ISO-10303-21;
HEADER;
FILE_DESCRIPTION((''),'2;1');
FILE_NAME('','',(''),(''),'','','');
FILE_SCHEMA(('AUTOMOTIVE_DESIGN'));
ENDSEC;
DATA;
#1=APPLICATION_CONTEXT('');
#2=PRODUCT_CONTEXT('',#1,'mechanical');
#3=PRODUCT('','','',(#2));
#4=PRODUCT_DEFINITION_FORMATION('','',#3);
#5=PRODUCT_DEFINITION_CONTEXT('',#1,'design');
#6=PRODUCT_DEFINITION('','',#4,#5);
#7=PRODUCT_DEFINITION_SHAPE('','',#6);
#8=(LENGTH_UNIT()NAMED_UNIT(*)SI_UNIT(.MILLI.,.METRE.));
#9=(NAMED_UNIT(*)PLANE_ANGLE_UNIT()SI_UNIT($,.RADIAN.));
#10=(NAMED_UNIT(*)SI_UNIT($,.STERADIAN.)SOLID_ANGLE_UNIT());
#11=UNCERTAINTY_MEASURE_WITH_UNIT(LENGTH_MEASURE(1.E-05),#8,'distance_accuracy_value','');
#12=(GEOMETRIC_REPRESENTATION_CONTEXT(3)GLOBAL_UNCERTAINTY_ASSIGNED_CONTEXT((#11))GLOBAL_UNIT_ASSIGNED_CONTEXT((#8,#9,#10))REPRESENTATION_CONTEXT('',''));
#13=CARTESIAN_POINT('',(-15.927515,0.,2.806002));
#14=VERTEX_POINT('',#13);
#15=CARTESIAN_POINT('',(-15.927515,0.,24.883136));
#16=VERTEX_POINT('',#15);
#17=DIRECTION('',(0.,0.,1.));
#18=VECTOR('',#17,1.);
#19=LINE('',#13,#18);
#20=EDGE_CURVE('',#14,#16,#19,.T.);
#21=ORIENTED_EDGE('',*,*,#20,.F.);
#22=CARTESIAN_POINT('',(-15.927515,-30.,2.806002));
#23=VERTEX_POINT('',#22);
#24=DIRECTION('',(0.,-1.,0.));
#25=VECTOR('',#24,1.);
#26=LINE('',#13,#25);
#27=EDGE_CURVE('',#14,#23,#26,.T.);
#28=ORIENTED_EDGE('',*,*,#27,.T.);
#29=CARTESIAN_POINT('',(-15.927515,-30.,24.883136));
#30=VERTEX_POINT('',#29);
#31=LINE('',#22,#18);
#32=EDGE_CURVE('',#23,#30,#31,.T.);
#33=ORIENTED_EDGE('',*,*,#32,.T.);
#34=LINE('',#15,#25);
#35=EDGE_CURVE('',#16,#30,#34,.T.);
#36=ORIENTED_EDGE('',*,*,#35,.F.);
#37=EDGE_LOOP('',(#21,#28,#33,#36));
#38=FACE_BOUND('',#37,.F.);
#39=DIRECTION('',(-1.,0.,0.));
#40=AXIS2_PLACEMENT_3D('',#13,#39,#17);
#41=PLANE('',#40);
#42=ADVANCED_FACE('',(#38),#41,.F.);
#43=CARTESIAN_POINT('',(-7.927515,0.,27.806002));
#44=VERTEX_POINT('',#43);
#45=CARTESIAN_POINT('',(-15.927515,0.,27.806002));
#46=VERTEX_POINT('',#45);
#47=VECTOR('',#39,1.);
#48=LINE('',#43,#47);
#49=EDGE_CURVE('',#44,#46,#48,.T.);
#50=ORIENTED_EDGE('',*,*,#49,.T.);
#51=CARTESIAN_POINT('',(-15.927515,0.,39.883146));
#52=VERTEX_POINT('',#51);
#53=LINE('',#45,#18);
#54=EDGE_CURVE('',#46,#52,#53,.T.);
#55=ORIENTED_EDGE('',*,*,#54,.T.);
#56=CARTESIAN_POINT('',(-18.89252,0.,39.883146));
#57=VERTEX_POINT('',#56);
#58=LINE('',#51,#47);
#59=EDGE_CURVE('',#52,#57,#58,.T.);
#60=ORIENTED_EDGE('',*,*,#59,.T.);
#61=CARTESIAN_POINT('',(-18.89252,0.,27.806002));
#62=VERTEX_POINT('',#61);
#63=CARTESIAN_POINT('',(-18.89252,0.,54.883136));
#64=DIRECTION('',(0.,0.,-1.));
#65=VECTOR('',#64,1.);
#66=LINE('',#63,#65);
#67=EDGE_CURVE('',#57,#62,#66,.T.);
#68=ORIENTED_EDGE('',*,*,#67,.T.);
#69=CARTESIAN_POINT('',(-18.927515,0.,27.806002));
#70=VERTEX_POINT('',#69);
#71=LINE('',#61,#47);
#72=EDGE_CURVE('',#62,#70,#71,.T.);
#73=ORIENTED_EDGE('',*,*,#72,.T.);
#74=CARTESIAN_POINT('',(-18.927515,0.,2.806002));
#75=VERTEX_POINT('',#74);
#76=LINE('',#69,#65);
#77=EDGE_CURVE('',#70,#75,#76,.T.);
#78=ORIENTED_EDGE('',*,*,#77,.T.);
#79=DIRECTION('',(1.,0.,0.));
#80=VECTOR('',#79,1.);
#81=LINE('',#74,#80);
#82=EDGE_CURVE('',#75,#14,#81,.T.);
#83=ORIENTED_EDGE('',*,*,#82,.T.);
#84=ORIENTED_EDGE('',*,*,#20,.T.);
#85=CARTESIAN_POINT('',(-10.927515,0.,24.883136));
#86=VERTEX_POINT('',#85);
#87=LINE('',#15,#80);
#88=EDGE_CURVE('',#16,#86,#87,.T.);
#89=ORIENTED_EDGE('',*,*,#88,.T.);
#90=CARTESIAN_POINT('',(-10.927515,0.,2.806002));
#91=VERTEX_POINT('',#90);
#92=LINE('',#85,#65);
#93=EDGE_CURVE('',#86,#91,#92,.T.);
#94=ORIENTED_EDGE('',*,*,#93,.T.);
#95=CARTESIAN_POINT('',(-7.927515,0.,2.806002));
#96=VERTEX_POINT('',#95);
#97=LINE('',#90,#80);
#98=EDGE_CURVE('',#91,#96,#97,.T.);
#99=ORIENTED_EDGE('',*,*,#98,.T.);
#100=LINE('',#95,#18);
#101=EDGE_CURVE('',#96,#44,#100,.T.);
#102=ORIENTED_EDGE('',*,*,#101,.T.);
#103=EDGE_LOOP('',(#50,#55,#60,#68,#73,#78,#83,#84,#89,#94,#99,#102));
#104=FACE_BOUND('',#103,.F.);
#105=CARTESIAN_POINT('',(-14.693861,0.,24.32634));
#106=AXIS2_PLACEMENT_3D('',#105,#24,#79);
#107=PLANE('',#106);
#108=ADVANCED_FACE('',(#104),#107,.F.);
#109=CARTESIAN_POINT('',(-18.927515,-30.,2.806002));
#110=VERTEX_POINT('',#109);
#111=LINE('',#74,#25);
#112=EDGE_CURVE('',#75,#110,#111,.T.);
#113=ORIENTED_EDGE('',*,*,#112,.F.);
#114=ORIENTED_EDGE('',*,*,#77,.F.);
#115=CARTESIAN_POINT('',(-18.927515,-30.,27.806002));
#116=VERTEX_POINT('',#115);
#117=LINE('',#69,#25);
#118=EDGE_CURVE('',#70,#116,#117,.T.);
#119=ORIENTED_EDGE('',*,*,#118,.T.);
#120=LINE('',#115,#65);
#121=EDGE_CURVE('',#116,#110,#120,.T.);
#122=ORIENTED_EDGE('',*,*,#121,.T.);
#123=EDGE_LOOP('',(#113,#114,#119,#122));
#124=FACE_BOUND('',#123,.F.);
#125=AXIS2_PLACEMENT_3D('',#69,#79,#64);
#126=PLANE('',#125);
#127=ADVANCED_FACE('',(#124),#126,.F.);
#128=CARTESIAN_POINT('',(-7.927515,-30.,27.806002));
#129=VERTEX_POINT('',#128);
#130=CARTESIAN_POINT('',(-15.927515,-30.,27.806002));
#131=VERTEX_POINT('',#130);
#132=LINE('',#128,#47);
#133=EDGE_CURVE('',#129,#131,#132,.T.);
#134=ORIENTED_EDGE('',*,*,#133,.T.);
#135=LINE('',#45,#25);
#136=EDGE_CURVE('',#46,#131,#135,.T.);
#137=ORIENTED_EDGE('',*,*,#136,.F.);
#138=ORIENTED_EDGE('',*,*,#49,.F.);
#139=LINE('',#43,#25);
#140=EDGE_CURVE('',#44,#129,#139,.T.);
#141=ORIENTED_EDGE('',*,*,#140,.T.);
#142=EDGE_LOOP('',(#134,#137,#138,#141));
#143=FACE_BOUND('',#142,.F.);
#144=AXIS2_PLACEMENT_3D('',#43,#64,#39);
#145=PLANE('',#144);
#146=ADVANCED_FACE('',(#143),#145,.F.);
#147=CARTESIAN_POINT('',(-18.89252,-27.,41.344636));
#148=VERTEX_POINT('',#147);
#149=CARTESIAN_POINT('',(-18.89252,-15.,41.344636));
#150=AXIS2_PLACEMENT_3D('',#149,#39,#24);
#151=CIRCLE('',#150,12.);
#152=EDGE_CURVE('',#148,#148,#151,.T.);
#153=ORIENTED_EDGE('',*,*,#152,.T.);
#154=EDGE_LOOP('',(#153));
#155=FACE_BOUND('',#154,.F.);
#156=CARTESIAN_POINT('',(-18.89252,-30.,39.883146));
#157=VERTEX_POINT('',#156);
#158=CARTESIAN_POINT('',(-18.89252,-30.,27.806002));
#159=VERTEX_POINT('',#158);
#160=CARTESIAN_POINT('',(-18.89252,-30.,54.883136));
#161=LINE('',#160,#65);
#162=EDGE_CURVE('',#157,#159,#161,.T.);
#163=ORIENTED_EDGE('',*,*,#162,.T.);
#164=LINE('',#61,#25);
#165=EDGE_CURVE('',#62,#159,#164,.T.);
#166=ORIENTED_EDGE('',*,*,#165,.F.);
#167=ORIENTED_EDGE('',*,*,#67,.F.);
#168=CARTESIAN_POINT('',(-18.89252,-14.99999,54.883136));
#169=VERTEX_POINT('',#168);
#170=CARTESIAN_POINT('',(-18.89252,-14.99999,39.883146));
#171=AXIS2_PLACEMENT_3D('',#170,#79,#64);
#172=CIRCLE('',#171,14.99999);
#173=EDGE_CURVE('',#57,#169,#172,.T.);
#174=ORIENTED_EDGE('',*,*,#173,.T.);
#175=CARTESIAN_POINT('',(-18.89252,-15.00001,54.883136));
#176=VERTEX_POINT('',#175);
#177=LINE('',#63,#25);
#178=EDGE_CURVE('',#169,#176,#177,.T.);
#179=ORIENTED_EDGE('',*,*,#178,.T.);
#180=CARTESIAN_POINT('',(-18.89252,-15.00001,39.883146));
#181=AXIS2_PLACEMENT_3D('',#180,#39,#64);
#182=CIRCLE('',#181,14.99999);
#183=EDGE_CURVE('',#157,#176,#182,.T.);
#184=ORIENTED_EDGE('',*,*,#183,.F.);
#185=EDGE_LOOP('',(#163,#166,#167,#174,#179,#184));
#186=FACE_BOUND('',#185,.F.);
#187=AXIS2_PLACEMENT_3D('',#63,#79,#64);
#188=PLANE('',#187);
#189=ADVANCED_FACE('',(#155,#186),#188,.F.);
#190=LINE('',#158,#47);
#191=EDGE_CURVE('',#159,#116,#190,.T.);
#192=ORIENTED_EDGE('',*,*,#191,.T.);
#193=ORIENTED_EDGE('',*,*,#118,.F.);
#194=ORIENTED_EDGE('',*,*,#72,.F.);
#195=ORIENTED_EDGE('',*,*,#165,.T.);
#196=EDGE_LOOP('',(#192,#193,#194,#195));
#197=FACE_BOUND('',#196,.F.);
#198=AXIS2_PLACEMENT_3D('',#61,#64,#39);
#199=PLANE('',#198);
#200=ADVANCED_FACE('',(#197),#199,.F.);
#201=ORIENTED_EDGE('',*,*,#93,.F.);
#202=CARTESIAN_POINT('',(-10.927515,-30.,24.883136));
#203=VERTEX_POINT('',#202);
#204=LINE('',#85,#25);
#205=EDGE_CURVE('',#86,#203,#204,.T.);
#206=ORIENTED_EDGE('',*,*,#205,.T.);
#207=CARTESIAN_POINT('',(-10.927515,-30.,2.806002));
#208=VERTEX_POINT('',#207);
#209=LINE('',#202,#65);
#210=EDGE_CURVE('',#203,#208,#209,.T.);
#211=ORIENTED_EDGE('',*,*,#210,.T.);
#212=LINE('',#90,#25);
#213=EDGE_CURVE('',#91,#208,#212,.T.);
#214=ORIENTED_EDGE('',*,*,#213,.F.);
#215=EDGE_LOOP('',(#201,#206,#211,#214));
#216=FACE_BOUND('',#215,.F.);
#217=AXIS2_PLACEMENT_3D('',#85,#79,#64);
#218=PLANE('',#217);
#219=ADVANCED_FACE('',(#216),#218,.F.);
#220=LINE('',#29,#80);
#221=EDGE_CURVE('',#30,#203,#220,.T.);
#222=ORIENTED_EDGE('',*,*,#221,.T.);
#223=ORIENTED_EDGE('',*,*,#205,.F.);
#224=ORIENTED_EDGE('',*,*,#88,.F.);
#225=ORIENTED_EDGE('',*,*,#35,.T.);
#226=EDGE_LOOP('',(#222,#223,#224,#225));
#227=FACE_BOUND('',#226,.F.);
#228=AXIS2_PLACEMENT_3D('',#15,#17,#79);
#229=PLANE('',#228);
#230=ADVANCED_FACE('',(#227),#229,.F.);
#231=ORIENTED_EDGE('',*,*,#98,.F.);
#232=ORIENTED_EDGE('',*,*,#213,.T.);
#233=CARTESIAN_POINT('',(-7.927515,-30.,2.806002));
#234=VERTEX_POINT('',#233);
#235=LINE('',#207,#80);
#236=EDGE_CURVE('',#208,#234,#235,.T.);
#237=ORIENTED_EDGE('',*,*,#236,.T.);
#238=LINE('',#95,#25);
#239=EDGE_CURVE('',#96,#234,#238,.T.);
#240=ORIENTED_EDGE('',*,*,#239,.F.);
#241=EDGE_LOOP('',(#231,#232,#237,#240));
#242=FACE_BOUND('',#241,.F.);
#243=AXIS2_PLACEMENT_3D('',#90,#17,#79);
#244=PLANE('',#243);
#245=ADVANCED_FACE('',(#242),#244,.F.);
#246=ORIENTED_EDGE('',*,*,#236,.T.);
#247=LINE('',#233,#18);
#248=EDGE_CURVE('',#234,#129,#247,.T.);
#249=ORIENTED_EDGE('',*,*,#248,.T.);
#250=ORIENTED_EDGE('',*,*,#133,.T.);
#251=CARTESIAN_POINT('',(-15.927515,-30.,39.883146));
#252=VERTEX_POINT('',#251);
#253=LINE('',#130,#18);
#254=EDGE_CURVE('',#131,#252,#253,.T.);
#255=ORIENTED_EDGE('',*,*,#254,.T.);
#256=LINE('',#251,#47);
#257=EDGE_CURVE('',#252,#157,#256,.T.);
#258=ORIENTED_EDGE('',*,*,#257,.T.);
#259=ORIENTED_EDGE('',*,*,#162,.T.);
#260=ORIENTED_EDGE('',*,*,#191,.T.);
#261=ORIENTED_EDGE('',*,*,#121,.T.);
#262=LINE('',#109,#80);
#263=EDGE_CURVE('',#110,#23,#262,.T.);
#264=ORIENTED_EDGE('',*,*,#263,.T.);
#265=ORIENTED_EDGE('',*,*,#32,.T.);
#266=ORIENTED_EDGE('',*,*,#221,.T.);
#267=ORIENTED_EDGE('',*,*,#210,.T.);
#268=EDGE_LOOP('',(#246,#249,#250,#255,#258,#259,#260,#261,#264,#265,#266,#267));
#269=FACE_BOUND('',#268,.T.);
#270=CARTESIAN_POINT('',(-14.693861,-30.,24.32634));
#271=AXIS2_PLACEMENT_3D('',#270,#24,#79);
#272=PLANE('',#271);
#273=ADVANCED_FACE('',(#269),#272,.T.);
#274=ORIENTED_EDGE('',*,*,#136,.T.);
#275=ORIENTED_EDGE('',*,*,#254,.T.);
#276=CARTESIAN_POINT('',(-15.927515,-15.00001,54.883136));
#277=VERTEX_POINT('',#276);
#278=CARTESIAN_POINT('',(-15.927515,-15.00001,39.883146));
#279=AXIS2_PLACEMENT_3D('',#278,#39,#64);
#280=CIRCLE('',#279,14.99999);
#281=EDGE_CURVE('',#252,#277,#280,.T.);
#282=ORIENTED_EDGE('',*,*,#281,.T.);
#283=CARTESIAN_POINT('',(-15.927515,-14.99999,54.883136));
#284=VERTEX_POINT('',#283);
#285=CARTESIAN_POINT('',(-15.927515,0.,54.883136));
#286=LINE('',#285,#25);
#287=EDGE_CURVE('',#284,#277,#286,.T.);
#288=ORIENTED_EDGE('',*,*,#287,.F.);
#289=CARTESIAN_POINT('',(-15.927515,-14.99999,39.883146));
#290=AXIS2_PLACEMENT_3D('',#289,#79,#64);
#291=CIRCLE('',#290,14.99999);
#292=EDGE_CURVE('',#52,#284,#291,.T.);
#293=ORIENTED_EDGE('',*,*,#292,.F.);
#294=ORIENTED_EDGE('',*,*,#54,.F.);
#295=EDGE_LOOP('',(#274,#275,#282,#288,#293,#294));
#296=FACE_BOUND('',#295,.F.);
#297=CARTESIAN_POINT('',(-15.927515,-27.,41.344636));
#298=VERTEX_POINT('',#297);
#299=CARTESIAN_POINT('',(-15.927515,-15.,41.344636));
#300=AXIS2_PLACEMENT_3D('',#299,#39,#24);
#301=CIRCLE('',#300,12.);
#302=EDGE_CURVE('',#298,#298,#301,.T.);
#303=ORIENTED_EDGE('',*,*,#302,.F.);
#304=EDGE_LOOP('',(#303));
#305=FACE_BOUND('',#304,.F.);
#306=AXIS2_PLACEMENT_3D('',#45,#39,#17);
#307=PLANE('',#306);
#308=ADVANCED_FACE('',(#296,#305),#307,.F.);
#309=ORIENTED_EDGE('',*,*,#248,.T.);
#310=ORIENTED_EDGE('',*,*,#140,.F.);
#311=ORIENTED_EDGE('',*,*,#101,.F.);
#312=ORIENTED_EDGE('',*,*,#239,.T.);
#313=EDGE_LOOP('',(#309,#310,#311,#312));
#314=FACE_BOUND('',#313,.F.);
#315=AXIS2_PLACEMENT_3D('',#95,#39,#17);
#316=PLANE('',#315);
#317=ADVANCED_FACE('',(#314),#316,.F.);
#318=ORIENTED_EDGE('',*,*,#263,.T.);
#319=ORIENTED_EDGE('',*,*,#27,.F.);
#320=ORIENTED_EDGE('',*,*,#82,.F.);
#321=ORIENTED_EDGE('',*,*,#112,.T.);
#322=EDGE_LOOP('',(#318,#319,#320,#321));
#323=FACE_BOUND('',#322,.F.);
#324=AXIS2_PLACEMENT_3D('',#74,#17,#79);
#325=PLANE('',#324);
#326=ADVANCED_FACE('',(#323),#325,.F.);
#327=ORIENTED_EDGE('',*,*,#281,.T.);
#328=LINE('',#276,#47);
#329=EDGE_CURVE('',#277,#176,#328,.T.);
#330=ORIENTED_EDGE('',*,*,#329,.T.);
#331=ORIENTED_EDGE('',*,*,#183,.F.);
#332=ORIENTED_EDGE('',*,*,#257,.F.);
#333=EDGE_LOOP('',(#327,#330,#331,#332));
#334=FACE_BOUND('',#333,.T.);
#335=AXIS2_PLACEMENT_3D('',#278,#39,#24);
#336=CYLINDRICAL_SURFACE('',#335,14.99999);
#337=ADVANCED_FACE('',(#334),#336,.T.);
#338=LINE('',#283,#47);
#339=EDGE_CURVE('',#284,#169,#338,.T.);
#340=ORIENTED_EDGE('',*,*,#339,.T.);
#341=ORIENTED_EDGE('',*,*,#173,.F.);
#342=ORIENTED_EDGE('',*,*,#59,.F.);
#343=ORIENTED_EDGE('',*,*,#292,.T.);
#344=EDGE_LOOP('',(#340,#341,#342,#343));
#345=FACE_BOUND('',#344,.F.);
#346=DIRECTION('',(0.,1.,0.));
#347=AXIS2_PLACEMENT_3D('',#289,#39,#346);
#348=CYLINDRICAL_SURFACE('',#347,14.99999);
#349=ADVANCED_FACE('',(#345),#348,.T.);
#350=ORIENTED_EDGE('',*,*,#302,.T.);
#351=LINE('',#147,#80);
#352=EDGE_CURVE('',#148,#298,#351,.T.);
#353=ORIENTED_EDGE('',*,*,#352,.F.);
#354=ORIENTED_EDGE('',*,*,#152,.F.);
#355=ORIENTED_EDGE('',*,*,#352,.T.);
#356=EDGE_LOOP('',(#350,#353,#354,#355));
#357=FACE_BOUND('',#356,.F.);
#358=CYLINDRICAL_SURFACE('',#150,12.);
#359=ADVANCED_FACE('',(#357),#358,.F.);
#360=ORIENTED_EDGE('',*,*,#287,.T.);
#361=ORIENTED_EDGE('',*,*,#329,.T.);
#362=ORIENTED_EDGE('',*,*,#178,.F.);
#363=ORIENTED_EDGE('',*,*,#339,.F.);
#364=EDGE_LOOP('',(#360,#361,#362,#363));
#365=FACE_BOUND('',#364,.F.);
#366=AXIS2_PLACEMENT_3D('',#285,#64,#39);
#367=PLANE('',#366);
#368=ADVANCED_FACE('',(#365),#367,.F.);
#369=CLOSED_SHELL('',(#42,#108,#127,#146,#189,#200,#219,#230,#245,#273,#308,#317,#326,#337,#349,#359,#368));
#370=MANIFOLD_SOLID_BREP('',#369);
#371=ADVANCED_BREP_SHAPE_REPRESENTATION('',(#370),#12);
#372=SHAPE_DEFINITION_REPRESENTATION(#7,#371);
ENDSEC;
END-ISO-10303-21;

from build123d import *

# Parameters (mm, degrees)
F1_DEPTH = 30
F2_R     = 12
F3_DEPTH = 25
F4_R     = 14.99999
F5_DEPTH = 7.3296


# Not quite as in the source:
# - a fillet or chamfer is up to 0.001 mm smaller than in the source, because OpenCascade refuses the exact size


with BuildPart() as f1:
    # F0 (on Front) → F1 (new body)
    with BuildSketch(Plane.XZ):
        Polygon((-18.8925201073, 27.8060024955), (-18.9275150057, 27.8060024955), (-18.9275150057, 2.8060024955), (-15.9275150057, 2.8060024955), (-15.9275150057, 24.8831361532), (-10.9275150057, 24.8831361532), (-10.9275150057, 2.8060024955), (-7.9275150057, 2.8060024955), (-7.9275150057, 27.8060024955), (-10.9275150057, 27.8060024955), (-15.9275150057, 27.8060024955), (-15.9275150057, 54.8831361532), (-18.8925201073, 54.8831361532), align=None)
    extrude(amount=F1_DEPTH)

    # F2 (on face) → F3 (cut)
    with BuildSketch(Plane(origin=(-18.8925201073, 0, 0), x_dir=(0, -1, 0), z_dir=(-1, 0, 0))):
        with Locations((15, 41.3446361532)):
            Circle(F2_R)
    extrude(amount=-F3_DEPTH, mode=Mode.SUBTRACT)

    # F4 (radius 15 in the source; OpenCascade refuses exactly that, so slightly less here)
    f4_edges = [f1.edges().sort_by_distance(p)[0] for p in [
        (-17.410018, 0, 54.883136),
        (-17.410018, -30, 54.883136),
    ]]
    fillet(f4_edges, radius=F4_R)

    # F2 (on face) → F5 (cut)
    with BuildSketch(Plane(origin=(-18.8925201073, 0, 0), x_dir=(0, -1, 0), z_dir=(-1, 0, 0))):
        with Locations((15, 41.3446361532)):
            Circle(F2_R)
    extrude(amount=-F5_DEPTH, mode=Mode.SUBTRACT)


solid = f1.part
